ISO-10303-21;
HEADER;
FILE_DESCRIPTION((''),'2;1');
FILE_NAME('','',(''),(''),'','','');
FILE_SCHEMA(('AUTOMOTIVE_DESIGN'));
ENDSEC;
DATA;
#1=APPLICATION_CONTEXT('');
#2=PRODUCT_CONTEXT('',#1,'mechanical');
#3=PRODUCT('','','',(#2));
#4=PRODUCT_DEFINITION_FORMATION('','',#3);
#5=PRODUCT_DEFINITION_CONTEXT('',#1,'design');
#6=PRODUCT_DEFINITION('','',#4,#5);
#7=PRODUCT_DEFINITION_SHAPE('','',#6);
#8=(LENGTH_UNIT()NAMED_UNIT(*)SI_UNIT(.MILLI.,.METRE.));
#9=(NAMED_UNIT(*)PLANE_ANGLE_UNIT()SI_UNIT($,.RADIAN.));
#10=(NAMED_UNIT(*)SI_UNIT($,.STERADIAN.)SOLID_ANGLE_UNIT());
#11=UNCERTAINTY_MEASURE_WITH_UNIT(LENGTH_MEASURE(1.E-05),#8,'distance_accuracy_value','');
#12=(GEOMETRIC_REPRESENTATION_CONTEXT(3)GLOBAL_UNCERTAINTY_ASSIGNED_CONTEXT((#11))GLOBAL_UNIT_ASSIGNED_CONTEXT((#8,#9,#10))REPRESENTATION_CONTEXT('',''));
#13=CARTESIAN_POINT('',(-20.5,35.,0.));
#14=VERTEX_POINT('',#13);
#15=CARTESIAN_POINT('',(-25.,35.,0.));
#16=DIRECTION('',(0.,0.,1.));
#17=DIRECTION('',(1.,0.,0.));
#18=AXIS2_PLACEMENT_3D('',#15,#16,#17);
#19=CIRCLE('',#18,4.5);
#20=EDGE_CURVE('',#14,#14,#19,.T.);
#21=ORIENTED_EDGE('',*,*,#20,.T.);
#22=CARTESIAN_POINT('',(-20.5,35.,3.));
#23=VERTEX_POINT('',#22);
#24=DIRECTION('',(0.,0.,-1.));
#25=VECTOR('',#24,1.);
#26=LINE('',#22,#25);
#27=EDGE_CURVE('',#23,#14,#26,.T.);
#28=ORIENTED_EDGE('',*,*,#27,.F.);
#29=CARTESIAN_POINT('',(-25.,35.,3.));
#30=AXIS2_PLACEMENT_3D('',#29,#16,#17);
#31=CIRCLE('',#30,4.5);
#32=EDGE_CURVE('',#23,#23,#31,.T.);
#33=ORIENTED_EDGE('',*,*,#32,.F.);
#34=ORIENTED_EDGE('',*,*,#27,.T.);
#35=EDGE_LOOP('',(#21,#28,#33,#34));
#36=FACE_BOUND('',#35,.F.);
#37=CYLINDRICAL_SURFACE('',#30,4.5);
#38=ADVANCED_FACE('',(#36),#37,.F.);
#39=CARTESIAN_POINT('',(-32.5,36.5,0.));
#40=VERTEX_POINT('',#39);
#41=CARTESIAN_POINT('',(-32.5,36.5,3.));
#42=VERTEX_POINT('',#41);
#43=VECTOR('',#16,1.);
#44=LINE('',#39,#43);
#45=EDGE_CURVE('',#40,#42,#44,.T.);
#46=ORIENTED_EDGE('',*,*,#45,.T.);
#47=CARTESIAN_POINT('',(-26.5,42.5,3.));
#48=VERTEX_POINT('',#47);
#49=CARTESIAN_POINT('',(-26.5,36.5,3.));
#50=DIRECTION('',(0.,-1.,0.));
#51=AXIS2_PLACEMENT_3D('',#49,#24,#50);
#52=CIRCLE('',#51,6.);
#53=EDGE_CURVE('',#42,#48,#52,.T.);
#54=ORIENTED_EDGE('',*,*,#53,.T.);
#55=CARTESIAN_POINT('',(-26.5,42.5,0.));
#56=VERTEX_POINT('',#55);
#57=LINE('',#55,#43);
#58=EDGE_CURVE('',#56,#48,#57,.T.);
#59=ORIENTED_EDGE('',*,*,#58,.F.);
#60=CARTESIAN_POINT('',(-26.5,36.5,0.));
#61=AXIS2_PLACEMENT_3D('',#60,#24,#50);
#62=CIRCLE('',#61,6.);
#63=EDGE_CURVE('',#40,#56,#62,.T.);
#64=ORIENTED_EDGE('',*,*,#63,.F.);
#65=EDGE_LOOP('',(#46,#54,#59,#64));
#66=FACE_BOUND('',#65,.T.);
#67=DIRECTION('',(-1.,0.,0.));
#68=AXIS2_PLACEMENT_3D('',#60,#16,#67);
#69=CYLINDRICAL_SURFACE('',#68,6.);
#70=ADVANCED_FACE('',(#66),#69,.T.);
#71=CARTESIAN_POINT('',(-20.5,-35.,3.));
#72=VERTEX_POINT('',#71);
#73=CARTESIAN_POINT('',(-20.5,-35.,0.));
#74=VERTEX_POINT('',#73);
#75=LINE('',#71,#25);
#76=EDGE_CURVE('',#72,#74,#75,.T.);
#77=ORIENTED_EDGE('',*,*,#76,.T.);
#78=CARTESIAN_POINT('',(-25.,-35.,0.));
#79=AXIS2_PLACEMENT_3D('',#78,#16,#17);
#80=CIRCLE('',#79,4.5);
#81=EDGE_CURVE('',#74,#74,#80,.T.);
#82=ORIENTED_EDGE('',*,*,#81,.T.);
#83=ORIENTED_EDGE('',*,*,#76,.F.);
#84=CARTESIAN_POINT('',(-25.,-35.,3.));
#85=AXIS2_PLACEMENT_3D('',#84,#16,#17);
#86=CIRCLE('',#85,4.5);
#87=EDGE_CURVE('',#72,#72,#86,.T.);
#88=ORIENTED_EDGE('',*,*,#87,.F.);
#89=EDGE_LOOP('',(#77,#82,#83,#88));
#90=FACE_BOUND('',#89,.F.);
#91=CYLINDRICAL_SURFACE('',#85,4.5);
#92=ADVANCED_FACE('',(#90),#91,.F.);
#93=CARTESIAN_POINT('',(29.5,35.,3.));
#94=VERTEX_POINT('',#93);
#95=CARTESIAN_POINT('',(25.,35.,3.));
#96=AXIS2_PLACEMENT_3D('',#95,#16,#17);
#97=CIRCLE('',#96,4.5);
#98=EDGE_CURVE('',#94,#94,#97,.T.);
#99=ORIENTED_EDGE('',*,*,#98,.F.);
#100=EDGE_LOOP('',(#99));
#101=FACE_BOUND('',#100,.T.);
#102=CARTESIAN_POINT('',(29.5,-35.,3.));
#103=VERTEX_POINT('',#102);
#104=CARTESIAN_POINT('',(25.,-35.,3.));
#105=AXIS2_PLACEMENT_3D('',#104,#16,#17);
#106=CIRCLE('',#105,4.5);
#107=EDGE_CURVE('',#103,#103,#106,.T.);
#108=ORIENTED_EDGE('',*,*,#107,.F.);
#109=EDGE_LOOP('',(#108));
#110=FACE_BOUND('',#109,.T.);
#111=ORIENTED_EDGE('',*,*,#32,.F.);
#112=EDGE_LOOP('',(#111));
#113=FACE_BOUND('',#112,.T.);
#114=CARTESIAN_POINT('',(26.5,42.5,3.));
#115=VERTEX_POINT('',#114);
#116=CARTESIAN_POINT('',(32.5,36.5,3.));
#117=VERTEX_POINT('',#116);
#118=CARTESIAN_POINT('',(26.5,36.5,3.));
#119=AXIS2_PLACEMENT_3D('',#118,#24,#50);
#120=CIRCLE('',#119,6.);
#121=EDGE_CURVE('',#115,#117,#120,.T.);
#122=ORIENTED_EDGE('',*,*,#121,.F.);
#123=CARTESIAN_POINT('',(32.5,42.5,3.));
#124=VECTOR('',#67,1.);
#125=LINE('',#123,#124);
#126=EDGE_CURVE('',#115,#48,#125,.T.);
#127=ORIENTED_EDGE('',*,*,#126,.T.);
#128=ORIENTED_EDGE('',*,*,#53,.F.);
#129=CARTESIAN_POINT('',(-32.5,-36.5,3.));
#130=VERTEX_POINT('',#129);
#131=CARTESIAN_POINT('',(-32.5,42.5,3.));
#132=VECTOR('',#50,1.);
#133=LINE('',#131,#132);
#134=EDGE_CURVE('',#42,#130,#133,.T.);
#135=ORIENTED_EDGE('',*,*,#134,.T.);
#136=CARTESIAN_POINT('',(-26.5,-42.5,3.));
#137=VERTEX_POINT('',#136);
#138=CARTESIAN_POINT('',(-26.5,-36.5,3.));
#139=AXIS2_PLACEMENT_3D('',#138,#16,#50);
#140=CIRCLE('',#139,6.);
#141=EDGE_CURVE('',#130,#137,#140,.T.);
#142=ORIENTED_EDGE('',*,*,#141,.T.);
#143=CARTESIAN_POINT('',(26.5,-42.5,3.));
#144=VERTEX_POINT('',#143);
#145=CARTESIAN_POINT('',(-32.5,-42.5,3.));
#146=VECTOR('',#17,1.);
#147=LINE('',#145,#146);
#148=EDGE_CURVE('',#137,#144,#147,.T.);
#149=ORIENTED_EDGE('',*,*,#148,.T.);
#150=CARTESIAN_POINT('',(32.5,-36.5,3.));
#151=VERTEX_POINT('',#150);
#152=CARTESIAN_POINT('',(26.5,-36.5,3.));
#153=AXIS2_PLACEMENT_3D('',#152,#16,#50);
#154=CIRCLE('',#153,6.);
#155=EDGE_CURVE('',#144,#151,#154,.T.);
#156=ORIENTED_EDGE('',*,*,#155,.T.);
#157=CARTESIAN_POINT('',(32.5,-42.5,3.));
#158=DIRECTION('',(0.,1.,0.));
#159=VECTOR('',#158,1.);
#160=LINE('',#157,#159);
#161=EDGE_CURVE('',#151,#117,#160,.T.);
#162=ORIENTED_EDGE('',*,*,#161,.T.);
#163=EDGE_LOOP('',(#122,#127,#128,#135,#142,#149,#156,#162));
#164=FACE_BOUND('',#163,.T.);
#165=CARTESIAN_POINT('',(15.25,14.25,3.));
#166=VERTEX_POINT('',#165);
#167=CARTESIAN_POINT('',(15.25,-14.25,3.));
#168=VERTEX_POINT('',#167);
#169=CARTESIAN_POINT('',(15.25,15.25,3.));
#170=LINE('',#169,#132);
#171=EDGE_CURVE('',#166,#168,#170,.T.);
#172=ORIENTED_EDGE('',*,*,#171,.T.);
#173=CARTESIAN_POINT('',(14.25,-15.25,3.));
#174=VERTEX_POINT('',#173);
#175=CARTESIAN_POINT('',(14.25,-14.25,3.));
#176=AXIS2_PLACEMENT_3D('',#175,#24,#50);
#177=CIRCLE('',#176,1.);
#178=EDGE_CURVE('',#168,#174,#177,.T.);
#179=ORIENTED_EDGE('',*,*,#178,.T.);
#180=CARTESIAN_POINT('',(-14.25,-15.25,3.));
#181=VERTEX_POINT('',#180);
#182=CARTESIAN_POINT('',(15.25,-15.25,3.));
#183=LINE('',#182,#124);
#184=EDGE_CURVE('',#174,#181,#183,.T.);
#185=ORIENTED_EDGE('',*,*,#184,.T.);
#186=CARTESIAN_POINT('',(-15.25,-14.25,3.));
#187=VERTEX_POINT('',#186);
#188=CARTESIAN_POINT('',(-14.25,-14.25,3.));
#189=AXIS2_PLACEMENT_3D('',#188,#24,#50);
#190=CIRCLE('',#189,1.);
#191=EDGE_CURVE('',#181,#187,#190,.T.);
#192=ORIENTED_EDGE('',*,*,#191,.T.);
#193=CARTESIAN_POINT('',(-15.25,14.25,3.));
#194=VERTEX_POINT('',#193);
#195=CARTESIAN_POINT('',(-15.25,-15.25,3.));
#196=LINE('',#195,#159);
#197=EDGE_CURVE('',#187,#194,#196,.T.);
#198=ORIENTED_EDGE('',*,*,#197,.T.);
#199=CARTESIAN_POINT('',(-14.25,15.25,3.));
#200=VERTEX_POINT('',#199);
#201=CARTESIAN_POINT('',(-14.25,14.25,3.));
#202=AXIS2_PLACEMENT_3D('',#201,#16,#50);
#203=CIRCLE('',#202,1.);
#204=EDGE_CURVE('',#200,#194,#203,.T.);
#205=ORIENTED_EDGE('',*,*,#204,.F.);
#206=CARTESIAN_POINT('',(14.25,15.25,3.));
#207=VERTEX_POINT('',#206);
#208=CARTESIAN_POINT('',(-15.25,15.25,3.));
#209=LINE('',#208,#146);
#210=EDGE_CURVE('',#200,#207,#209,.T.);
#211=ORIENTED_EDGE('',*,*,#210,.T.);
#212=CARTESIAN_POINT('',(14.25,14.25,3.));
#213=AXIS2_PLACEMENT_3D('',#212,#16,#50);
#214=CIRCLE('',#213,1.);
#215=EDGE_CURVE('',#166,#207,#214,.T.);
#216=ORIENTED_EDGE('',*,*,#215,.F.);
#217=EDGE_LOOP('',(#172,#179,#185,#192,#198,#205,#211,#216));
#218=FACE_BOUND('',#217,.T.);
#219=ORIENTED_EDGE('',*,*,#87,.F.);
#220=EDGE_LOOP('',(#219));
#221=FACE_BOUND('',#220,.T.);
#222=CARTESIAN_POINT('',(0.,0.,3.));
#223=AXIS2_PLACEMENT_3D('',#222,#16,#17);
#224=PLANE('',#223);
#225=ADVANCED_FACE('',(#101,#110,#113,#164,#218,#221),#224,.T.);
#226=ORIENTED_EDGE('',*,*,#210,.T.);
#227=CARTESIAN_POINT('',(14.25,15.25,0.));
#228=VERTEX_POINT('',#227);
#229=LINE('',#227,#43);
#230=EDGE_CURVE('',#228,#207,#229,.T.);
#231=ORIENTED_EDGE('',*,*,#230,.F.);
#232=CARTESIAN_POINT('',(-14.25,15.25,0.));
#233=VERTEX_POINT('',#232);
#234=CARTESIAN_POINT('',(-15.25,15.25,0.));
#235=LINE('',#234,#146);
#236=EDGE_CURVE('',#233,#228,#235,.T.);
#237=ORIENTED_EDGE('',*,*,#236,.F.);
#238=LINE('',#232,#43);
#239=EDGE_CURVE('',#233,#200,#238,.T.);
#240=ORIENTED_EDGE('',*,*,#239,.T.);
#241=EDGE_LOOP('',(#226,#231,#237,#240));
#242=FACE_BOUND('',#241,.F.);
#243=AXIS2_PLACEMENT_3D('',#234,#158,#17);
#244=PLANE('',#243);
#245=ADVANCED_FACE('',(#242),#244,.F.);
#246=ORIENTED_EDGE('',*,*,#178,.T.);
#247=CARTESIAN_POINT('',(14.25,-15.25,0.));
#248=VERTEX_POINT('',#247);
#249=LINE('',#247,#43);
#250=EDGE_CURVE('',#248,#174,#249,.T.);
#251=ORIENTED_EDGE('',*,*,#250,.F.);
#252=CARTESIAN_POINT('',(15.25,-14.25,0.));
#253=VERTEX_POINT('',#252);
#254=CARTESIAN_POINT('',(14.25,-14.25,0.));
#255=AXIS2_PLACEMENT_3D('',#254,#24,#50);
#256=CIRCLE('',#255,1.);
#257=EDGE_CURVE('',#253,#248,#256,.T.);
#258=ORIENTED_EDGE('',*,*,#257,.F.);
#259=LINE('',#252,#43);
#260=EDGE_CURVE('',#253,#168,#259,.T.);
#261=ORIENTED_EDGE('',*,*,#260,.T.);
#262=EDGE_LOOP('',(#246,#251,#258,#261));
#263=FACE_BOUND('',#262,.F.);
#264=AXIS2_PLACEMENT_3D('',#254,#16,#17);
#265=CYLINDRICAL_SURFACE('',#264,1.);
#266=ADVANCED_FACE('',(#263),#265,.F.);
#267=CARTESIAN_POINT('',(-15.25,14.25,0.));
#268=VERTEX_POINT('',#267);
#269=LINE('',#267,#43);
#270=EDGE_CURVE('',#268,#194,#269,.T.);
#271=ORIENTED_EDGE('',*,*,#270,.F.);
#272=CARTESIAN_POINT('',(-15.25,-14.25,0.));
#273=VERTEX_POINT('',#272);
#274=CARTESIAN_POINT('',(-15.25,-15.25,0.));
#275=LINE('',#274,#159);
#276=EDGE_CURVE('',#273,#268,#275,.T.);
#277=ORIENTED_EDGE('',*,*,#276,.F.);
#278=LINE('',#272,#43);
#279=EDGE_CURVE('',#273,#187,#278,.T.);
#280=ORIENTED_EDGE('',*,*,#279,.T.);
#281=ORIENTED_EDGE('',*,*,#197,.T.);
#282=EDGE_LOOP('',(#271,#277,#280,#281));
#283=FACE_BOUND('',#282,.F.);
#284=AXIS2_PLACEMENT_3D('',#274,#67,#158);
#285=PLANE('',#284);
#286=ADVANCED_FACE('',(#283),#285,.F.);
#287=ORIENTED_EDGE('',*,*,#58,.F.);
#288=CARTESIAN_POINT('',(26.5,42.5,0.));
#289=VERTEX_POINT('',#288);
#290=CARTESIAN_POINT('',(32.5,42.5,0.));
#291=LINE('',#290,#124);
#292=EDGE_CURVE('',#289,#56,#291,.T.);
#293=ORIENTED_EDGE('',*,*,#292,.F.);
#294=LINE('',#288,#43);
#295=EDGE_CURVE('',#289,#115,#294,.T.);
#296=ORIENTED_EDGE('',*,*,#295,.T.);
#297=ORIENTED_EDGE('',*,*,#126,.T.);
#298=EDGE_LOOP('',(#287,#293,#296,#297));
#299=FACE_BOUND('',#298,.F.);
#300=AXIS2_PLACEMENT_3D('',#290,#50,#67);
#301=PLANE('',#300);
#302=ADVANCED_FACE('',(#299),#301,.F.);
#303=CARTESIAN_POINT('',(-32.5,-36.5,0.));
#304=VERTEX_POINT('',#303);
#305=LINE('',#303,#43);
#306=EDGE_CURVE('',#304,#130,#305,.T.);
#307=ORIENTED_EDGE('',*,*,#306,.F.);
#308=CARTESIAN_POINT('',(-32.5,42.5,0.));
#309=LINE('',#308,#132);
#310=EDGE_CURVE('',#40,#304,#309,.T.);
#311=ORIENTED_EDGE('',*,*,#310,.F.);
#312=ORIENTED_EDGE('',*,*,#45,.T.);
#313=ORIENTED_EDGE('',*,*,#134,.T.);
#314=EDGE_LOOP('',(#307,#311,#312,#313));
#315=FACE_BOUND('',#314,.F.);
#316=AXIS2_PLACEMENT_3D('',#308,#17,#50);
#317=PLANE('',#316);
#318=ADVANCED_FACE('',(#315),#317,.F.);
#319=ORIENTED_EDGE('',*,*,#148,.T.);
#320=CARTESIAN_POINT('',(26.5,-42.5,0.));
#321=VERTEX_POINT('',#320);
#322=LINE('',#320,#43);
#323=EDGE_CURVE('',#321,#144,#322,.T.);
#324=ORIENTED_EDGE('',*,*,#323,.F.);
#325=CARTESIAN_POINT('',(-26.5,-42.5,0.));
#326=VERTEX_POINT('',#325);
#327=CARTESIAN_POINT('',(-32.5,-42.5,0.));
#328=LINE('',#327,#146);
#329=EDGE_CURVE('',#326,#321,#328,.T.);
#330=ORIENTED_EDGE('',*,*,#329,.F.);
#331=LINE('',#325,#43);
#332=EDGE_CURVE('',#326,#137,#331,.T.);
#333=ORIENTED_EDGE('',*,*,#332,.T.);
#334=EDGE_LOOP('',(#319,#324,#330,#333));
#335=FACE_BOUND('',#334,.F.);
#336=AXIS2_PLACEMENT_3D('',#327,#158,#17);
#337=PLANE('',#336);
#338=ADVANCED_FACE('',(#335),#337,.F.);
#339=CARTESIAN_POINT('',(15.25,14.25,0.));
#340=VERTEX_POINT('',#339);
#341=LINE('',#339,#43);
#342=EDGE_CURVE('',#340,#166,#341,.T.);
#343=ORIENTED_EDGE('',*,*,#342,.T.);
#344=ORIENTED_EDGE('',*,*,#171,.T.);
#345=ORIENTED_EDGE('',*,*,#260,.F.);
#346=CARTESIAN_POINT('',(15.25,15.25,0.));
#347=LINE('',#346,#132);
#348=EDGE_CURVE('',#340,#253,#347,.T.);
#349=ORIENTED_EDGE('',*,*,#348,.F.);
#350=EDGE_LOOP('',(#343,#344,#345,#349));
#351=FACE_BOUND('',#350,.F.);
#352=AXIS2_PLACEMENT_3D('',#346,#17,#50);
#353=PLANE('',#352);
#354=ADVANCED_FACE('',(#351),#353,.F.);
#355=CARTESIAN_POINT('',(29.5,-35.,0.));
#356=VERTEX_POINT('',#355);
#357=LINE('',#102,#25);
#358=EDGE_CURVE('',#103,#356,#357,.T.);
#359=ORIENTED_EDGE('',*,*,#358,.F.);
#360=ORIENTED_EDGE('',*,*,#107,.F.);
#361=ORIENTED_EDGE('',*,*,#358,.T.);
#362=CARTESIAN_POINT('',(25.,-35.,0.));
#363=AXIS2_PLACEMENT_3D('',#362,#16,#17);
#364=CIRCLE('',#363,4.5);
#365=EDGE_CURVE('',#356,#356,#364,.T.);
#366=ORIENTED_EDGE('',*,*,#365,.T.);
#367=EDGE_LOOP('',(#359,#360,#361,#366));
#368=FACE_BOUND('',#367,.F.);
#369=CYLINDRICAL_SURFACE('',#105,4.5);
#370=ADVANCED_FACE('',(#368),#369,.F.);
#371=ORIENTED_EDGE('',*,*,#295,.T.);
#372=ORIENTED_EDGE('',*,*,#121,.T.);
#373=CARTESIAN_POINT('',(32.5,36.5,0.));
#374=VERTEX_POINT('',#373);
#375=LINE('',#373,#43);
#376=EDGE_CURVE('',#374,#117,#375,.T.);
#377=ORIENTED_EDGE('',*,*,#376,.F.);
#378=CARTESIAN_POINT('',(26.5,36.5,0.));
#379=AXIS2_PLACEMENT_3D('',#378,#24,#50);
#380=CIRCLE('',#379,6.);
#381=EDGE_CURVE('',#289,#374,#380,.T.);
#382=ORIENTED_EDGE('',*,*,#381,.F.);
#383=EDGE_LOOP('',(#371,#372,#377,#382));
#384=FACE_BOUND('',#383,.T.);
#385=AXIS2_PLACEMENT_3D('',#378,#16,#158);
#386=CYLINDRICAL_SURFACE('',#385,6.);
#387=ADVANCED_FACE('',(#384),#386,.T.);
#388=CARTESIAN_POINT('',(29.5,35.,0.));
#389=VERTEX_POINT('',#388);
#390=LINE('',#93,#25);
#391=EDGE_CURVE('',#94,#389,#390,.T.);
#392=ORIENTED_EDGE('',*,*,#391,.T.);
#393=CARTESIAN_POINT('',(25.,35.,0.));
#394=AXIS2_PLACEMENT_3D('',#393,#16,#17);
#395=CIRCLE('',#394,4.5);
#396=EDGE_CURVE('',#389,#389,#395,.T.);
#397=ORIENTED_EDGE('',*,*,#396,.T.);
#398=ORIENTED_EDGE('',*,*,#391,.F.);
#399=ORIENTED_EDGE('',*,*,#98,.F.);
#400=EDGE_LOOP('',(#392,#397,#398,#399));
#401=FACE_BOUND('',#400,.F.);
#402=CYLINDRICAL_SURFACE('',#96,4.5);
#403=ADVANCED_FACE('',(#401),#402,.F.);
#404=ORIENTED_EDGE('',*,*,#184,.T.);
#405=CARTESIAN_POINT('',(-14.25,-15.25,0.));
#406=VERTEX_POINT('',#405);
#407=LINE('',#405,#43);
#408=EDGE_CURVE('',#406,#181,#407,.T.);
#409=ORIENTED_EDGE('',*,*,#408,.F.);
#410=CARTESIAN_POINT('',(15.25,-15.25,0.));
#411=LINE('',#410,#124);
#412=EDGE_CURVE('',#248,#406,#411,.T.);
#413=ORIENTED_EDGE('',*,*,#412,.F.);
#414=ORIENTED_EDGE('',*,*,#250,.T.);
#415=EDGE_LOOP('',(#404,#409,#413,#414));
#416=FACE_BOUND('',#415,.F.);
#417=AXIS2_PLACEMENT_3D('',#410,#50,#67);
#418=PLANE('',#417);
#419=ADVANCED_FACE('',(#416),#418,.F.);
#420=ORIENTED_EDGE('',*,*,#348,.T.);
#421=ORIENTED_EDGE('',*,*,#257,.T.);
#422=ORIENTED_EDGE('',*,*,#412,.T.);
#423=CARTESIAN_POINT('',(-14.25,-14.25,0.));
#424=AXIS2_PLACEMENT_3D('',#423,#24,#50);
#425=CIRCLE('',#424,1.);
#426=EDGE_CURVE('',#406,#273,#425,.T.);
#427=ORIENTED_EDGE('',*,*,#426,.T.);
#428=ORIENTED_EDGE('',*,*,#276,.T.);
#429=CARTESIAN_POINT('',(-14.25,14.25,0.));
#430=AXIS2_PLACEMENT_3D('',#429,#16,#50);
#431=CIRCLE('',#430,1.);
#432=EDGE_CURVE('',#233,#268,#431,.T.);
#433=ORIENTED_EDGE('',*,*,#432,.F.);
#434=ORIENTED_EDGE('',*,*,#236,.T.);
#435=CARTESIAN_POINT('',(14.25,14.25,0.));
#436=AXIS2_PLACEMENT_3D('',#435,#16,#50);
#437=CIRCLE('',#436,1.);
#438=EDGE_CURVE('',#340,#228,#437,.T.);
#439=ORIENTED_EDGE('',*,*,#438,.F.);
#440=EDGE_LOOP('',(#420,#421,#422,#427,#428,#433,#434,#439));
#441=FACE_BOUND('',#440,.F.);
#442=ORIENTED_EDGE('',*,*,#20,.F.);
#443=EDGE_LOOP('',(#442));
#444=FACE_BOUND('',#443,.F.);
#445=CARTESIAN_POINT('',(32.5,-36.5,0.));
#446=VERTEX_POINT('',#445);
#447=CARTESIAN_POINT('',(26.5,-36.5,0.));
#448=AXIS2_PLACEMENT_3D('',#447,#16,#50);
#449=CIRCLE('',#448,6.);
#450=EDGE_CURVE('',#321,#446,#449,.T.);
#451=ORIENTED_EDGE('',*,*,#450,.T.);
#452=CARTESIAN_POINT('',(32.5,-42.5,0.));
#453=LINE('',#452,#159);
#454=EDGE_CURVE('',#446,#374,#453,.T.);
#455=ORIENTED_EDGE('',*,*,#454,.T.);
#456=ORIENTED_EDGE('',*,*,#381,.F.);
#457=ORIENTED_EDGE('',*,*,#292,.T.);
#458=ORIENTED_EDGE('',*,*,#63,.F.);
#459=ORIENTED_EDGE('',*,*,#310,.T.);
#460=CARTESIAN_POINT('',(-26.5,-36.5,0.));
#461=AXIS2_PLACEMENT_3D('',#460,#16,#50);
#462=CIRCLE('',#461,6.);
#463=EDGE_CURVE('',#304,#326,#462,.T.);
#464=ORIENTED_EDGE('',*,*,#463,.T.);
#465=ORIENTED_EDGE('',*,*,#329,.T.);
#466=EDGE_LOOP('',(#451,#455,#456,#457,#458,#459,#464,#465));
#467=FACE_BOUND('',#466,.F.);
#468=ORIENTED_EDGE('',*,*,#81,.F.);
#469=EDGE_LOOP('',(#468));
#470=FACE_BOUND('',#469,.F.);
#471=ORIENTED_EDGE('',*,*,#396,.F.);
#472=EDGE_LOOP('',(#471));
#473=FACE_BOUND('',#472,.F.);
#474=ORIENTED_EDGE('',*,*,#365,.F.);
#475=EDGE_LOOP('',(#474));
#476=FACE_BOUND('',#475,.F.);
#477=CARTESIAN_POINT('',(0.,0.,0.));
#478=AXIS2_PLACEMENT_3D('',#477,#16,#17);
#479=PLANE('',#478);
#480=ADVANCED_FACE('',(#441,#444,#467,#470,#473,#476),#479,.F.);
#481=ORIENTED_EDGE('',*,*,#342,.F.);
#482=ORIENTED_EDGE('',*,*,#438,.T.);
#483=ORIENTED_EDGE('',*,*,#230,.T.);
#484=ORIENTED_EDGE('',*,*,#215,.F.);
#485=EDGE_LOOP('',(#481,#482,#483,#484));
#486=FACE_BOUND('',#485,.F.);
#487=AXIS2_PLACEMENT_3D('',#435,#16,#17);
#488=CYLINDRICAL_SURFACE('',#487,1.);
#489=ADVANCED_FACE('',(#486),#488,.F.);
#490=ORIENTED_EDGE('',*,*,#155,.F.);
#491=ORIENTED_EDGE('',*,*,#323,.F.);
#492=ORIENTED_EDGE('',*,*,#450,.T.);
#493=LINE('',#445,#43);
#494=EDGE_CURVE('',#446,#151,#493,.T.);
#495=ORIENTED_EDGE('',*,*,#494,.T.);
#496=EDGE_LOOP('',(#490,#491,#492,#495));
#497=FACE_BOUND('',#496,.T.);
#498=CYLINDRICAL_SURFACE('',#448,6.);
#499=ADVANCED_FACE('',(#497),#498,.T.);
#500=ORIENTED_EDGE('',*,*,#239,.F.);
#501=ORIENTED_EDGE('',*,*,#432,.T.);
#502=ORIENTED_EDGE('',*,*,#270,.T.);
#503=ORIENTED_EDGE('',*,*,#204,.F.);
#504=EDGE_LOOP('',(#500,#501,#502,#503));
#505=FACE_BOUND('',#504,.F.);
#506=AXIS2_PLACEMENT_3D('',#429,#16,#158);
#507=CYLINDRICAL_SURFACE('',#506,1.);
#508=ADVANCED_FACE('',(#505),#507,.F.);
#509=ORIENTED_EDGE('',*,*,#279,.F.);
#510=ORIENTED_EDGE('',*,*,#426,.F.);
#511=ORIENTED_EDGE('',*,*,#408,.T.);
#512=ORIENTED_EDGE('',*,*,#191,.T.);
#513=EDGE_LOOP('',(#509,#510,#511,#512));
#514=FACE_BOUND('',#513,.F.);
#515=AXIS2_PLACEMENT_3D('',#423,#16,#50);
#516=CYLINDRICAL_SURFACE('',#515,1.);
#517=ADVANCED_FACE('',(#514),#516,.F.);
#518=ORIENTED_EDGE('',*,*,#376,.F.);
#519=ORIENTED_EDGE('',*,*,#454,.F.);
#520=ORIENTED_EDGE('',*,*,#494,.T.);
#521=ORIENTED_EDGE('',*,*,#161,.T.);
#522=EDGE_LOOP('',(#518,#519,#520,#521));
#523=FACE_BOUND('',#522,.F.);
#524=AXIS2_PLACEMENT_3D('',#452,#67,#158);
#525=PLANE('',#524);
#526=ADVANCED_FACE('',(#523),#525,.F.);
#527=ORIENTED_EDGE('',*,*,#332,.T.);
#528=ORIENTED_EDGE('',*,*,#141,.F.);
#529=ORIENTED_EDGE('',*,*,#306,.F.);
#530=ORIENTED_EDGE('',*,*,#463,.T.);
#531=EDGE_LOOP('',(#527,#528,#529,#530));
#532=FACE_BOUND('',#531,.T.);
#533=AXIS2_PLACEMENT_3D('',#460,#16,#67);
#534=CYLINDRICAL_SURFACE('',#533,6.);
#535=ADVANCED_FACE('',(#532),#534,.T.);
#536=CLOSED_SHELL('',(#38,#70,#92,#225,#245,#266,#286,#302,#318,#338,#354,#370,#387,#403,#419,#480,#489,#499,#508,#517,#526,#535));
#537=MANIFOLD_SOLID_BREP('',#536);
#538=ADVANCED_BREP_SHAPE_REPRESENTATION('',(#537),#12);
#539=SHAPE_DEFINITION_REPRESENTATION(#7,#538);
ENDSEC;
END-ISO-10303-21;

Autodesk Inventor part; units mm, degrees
ref_plane "YZ Plane" through (0, 0, 0) normal (1, 0, 0) x (0, 1, 0)
ref_plane "XZ Plane" through (0, 0, 0) normal (0, 1, 0) x (-1, 0, 0)
ref_plane "XY Plane" through (0, 0, 0) normal (0, 0, 1) x (1, 0, 0)
sketch "Sketch1" plane through (0, 0, 0) normal (0, 0, 1) x (1, 0, 0)
  line L0 (-32.5, -42.5) -> (32.5, -42.5)
  line L1 (32.5, -42.5) -> (32.5, 42.5)
  line L2 (32.5, 42.5) -> (-32.5, 42.5)
  line L3 (-32.5, 42.5) -> (-32.5, -42.5)
  line L4 (-32.5, -42.5) -> (32.5, 42.5) construction
  line L5 (32.5, -42.5) -> (-32.5, 42.5) construction
  line L6 (15.25, -15.25) -> (-15.25, -15.25)
  line L7 (-15.25, -15.25) -> (-15.25, 15.25)
  line L8 (-15.25, 15.25) -> (15.25, 15.25)
  line L9 (15.25, 15.25) -> (15.25, -15.25)
  line L10 (15.25, -15.25) -> (-15.25, 15.25) construction
  line L11 (-15.25, -15.25) -> (15.25, 15.25) construction
  point P0 (0, 0)
  dimension "d154" = 65
  dimension "d155" = 85
  dimension "d172" = 30.5
extrude "Plate5" add sketch "Sketch1" along normal blind 3
sketch "Sketch9" plane through (0, 0, 3) normal (0, 0, 1) x (1, 0, 0)
  circle A0 centre (25, -35) radius 4.5
  line L0 (25, 35) -> (-25, 35) construction
  line L1 (-25, 35) -> (-25, -35) construction
  line L2 (-25, -35) -> (25, -35) construction
  line L3 (25, -35) -> (25, 35) construction
  line L4 (25, 35) -> (-25, -35) construction
  line L5 (-25, 35) -> (25, -35) construction
  circle A1 centre (-25, -35) radius 4.5
  circle A2 centre (25, 35) radius 4.5
  circle A3 centre (-25, 35) radius 4.5
  point P0 (0, 0)
  dimension "d173" = 70
  dimension "d174" = 9
  dimension "d175" = 50
extrude "Cut2" cut sketch "Sketch9" against normal blind 3
fillet "Corner Round1" radius 6 4 edges at (32.5, 42.5, 1.5) (-32.5, 42.5, 1.5) (-32.5, -42.5, 1.5) (32.5, -42.5, 1.5)
fillet "Corner Round2" radius 1 4 edges at (-15.25, 15.25, 1.5) (-15.25, -15.25, 1.5) (15.25, -15.25, 1.5) (15.25, 15.25, 1.5)
properties part number "TZS 760 FDS 940 FLANGE 3" material "Stainless Steel"
